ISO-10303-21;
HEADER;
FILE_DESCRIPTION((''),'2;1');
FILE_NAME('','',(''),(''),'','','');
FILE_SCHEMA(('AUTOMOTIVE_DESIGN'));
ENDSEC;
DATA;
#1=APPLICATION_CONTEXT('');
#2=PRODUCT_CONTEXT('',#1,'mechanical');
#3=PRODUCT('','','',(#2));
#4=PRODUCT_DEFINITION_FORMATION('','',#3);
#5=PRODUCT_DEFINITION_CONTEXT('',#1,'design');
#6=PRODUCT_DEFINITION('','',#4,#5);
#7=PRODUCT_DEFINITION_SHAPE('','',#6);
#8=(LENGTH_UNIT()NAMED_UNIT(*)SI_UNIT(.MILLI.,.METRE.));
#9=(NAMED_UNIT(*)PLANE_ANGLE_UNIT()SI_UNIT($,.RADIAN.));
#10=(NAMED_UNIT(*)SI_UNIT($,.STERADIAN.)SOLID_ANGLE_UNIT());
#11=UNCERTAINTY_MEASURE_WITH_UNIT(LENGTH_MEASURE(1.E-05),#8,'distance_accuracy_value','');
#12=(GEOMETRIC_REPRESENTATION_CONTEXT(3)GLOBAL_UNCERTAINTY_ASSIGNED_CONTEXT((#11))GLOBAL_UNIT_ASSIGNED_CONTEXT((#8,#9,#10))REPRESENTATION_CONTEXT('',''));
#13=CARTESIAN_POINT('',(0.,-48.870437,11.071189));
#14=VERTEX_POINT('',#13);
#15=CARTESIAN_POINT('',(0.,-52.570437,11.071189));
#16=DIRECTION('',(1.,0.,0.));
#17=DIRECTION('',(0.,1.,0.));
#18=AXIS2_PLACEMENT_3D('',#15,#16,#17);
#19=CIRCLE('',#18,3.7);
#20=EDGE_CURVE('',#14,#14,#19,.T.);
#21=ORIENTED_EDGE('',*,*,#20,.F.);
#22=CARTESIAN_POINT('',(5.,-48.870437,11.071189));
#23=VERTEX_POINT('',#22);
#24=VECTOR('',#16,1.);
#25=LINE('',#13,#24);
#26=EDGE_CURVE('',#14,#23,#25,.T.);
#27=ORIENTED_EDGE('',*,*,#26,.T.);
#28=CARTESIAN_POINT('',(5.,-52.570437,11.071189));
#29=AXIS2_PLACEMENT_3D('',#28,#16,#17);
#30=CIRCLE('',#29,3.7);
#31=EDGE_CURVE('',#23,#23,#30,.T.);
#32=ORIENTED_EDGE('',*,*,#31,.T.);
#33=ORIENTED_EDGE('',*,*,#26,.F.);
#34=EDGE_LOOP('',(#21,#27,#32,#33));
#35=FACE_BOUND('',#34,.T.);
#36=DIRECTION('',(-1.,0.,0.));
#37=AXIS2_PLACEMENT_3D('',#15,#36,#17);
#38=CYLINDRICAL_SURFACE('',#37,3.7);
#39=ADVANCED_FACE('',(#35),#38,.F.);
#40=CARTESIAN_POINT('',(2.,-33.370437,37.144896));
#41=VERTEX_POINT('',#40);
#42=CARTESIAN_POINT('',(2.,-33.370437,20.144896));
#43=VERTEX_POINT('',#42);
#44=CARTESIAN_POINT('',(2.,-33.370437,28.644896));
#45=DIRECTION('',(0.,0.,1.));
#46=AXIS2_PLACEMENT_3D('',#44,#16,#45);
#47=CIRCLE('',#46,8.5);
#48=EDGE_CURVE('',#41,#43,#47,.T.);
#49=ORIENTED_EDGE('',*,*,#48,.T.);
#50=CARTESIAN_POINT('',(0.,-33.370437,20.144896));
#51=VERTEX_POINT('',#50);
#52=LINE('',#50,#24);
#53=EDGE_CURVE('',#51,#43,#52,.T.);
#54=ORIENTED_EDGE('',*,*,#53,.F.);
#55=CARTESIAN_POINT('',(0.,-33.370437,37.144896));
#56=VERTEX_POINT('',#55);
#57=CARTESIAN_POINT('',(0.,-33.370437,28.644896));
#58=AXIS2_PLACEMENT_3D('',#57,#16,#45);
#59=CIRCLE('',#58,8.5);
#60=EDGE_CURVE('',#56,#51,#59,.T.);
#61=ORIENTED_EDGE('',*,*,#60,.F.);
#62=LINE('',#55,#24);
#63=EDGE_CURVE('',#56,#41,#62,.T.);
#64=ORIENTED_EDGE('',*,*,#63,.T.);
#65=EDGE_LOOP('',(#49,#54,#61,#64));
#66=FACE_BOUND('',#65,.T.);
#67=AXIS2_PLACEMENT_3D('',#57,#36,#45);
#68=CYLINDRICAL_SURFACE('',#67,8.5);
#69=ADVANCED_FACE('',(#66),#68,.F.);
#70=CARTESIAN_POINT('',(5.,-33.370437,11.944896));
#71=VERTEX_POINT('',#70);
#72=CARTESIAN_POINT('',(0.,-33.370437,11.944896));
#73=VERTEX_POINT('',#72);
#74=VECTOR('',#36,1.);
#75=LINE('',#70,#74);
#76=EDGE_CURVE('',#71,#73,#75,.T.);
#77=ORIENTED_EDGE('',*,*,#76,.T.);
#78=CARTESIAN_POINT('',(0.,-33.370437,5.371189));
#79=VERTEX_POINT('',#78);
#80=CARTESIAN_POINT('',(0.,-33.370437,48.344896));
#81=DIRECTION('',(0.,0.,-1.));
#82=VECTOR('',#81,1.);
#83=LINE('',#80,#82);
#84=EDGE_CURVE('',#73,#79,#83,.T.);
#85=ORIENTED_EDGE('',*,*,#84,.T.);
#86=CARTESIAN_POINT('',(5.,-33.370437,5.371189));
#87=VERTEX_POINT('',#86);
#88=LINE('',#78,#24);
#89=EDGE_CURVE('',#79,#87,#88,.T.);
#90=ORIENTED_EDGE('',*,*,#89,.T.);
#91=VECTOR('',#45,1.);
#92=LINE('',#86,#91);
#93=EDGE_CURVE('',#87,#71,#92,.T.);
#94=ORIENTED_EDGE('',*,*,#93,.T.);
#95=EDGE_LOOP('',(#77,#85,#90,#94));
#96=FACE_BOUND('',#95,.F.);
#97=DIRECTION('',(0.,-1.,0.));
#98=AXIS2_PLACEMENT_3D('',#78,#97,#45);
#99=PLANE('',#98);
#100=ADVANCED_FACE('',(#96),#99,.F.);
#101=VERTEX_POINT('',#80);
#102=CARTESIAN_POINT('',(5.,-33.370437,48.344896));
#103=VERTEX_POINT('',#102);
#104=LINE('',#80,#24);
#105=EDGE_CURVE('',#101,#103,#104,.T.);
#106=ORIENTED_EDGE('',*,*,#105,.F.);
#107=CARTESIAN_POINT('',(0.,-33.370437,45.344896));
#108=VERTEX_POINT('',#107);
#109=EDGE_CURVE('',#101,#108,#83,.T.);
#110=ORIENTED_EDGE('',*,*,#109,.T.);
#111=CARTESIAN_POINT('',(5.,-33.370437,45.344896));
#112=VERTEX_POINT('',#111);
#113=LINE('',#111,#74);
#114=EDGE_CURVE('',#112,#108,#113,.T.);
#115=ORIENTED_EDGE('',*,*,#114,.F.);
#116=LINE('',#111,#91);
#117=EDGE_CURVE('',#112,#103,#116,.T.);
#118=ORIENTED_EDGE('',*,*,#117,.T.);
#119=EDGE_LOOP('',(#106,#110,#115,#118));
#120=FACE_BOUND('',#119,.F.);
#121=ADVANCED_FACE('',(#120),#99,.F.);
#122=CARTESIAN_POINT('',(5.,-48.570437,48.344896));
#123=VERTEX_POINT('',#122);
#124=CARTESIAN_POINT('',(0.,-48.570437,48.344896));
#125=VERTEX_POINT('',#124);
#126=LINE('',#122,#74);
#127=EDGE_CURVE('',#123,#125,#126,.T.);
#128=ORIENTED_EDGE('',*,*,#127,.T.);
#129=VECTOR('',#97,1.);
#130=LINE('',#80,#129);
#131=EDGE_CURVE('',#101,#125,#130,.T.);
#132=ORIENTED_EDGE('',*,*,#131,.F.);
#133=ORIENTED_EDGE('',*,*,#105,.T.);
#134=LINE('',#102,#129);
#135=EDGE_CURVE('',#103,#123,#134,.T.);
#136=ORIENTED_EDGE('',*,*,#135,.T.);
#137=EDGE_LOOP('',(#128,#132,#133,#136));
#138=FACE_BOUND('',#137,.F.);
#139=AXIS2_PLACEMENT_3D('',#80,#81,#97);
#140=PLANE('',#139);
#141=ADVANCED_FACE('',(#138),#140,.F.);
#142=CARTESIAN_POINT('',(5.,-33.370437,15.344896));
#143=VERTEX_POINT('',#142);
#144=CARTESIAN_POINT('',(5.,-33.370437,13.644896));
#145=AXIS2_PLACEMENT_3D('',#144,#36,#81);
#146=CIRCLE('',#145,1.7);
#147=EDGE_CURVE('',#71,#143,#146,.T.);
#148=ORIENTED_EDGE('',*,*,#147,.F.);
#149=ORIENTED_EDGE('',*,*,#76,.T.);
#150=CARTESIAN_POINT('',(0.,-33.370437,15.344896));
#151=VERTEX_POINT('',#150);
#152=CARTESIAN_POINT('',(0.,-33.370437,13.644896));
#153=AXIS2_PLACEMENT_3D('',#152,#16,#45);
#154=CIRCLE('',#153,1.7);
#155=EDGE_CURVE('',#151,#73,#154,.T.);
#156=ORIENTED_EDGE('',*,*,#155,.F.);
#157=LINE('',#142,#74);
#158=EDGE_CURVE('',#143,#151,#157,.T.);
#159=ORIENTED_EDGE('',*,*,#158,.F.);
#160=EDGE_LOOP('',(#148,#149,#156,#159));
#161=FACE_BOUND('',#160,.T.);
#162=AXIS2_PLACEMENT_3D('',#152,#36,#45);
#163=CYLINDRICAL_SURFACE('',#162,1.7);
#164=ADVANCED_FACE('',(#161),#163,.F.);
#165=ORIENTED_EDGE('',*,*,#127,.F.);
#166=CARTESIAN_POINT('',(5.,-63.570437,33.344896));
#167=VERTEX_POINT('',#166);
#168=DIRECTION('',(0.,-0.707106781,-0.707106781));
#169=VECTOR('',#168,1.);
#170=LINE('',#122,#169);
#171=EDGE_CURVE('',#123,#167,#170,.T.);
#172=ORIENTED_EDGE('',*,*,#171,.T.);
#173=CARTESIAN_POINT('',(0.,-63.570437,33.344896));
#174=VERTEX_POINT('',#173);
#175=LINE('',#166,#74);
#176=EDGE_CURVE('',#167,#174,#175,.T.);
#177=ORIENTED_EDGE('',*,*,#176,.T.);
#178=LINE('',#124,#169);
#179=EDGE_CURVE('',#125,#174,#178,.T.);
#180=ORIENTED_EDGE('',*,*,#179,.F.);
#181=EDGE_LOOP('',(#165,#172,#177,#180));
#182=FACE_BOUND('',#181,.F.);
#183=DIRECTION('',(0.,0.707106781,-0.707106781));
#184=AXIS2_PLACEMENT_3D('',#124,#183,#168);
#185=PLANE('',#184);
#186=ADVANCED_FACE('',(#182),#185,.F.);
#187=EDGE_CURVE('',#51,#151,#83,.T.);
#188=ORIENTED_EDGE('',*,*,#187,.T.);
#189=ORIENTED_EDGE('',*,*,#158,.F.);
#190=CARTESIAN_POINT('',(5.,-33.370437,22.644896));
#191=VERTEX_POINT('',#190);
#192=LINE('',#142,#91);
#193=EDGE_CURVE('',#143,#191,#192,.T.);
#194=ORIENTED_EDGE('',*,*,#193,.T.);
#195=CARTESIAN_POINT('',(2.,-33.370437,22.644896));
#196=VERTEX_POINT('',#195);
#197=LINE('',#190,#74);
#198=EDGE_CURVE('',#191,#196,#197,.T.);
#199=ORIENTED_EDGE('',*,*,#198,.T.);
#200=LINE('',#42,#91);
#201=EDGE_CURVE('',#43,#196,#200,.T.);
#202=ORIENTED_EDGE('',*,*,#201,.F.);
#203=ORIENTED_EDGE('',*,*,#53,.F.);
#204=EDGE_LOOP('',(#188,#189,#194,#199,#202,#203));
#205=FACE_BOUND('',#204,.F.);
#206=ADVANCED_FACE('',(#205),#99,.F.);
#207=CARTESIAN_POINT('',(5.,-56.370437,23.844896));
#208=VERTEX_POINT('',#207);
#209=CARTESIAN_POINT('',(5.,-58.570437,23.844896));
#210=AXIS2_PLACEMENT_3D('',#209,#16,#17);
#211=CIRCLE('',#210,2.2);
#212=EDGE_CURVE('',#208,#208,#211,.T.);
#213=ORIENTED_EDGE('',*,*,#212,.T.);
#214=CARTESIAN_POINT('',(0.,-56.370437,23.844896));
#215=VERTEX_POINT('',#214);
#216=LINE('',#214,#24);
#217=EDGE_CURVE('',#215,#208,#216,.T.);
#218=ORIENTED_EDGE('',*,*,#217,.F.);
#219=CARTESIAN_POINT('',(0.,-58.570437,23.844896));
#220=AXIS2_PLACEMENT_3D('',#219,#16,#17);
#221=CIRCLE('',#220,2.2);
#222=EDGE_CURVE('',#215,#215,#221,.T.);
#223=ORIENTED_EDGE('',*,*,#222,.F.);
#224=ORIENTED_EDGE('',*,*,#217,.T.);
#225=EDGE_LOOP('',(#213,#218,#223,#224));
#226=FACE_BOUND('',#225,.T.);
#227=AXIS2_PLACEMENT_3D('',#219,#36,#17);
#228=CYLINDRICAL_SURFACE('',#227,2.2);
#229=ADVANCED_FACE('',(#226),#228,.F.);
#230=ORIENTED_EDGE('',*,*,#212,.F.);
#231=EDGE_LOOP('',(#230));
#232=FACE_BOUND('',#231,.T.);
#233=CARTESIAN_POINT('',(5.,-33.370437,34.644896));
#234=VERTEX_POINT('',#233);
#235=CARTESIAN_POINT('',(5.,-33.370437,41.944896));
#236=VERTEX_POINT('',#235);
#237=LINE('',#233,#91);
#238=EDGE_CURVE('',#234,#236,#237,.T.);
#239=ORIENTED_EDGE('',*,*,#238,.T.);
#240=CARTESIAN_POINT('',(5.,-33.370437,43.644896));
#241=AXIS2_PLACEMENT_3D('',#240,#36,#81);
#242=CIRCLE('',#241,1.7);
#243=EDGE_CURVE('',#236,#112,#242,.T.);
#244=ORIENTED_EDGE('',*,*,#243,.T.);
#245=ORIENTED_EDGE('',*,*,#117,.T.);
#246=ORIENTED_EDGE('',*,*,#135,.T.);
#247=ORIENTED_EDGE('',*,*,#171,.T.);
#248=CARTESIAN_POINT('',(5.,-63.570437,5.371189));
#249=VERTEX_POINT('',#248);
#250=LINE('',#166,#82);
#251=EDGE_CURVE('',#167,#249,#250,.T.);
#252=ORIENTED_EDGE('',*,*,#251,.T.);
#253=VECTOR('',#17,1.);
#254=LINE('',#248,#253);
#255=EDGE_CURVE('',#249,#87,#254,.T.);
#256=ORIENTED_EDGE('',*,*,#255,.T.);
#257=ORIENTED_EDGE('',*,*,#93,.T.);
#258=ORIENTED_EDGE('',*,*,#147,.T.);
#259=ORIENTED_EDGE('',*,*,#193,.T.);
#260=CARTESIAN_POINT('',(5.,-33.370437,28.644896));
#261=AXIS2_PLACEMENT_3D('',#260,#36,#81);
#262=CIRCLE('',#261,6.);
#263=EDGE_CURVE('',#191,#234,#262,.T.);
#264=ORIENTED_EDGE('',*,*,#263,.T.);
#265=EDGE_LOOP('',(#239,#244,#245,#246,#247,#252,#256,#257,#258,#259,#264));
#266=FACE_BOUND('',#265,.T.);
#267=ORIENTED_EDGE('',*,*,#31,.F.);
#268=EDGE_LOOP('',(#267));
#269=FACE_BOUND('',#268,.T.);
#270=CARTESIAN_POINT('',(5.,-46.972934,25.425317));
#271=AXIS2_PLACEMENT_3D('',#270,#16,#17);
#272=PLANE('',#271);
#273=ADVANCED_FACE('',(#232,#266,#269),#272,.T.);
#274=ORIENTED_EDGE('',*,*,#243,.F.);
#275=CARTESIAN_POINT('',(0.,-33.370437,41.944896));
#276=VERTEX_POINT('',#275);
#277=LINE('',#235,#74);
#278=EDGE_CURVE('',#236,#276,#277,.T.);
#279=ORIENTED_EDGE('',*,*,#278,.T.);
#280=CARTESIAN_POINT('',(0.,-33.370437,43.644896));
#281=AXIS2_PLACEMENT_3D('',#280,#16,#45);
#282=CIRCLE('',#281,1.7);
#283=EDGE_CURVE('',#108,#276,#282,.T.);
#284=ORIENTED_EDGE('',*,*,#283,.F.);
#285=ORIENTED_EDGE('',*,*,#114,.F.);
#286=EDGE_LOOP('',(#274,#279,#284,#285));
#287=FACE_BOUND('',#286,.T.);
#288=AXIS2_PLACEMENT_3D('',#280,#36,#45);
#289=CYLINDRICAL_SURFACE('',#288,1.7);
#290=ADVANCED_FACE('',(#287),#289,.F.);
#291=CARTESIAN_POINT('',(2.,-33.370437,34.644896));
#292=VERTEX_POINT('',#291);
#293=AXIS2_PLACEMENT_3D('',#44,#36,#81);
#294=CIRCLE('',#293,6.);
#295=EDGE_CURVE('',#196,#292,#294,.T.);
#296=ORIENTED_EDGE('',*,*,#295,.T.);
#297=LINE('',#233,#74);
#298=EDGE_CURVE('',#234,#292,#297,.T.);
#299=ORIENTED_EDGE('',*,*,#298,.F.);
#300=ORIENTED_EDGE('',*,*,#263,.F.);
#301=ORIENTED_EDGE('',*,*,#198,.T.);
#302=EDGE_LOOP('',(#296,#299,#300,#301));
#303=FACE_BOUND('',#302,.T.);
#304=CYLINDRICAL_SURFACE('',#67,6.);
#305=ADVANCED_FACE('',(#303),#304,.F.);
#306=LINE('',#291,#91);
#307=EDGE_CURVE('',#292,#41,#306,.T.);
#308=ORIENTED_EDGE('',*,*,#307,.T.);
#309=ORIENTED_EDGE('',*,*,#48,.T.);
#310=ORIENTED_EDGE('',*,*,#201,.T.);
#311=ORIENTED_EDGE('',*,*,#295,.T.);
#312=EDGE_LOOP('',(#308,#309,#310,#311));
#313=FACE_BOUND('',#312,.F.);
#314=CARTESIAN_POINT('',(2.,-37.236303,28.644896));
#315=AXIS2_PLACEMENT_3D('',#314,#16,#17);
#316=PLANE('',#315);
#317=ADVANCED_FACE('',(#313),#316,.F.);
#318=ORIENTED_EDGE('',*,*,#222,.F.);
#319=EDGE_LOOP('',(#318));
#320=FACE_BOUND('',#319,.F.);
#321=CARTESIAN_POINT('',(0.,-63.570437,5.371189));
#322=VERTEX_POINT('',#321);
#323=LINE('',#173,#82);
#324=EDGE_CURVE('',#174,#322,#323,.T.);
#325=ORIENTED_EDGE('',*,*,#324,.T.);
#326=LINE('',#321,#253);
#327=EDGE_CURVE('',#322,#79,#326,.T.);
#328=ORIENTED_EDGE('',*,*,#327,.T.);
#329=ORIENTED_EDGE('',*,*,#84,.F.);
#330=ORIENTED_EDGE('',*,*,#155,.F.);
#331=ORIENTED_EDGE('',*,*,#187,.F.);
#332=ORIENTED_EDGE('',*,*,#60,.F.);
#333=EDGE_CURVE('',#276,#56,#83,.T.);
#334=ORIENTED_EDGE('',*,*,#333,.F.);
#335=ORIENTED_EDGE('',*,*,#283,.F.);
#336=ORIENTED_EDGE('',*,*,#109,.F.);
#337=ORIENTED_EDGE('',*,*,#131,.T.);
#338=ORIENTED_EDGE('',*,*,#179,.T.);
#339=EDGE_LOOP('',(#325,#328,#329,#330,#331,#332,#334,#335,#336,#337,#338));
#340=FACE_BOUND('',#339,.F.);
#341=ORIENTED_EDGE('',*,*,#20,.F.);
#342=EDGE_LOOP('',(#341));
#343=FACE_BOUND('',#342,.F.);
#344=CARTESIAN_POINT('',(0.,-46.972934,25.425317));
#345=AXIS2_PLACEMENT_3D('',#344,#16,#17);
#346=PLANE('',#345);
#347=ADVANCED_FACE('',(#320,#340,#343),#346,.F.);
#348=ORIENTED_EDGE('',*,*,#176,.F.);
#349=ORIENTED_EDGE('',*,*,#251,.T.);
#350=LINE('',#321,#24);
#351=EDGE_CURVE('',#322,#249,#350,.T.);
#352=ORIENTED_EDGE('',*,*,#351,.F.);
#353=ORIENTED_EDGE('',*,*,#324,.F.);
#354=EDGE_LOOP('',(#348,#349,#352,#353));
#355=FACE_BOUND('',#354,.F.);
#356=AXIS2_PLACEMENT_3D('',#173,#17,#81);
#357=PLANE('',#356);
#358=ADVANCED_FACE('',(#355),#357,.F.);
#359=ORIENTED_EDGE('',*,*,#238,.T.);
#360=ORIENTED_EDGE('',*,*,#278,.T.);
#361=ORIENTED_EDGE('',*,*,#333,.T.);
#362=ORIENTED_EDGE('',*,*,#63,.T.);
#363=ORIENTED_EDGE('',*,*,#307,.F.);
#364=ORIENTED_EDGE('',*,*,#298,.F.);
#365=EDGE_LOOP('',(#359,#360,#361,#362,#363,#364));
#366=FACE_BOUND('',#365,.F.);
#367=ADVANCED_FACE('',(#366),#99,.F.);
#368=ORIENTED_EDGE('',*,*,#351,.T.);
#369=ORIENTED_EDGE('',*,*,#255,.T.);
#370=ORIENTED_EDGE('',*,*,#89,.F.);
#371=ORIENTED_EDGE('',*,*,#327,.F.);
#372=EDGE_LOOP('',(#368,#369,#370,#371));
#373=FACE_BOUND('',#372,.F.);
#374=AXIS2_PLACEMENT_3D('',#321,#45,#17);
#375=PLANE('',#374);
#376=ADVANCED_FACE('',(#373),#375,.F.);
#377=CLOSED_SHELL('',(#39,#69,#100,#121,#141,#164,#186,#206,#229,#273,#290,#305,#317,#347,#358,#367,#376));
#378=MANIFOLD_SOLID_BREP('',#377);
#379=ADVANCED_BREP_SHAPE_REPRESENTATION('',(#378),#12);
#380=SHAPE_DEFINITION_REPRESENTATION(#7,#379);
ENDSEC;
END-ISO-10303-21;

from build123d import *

# Parameters (mm, degrees)
F0_R     = 3.7
F0_R_2   = 2.2
F1_DEPTH = 5
F2_DEPTH = 3
F3_DEPTH = 3
F5_DEPTH = 2


# Not quite as in the source:
# - a feature of the source that left no trace in its solid (it failed there, or was rolled back) is left out


with BuildPart() as f1:
    # F0 (on Right) → F1 (new body)
    with BuildSketch(Plane.YZ):
        with BuildLine():
            Line((-63.5704365752, 33.3448962937), (-63.5704365752, 5.3711892086))
            Line((-63.5704365752, 5.3711892086), (-33.3704365752, 5.3711892086))
            Line((-33.3704365752, 5.3711892086), (-33.3704365752, 11.9448962937))
            ThreePointArc((-33.3704365752, 11.9448962937), (-35.0704365752, 13.6448962937), (-33.3704365752, 15.3448962937))
            Line((-33.3704365752, 15.3448962937), (-33.3704365752, 20.1448962937))
            ThreePointArc((-33.3704365752, 20.1448962937), (-41.8704365752, 28.6448962937), (-33.3704365752, 37.1448962937))
            Line((-33.3704365752, 37.1448962937), (-33.3704365752, 41.9448962937))
            ThreePointArc((-33.3704365752, 41.9448962937), (-35.0704365752, 43.6448962937), (-33.3704365752, 45.3448962937))
            Line((-33.3704365752, 45.3448962937), (-33.3704365752, 48.3448962937))
            Line((-33.3704365752, 48.3448962937), (-48.5704365752, 48.3448962937))
            Line((-48.5704365752, 48.3448962937), (-63.5704365752, 33.3448962937))
        make_face()
        with Locations((-52.5704365752, 11.0711892086)):
            Circle(F0_R, mode=Mode.SUBTRACT)
        with Locations((-58.5704365752, 23.8448962937)):
            Circle(F0_R_2, mode=Mode.SUBTRACT)
        with BuildLine():
            ThreePointArc((-33.3704365752, 37.1448962937), (-41.8704365752, 28.6448962937), (-33.3704365752, 20.1448962937))
            Line((-33.3704365752, 20.1448962937), (-33.3704365752, 22.6448962937))
            ThreePointArc((-33.3704365752, 22.6448962937), (-39.3704365752, 28.6448962937), (-33.3704365752, 34.6448962937))
            Line((-33.3704365752, 34.6448962937), (-33.3704365752, 37.1448962937))
        make_face()
    extrude(amount=F1_DEPTH)

    # F0 (on Right) → F2 (join)
    with BuildSketch(Plane.YZ):
        with BuildLine():
            Line((-63.5704365752, 33.3448962937), (-63.5704365752, 5.3711892086))
            Line((-63.5704365752, 5.3711892086), (-33.3704365752, 5.3711892086))
            Line((-33.3704365752, 5.3711892086), (-33.3704365752, 11.9448962937))
            ThreePointArc((-33.3704365752, 11.9448962937), (-35.0704365752, 13.6448962937), (-33.3704365752, 15.3448962937))
            Line((-33.3704365752, 15.3448962937), (-33.3704365752, 20.1448962937))
            ThreePointArc((-33.3704365752, 20.1448962937), (-41.8704365752, 28.6448962937), (-33.3704365752, 37.1448962937))
            Line((-33.3704365752, 37.1448962937), (-33.3704365752, 41.9448962937))
            ThreePointArc((-33.3704365752, 41.9448962937), (-35.0704365752, 43.6448962937), (-33.3704365752, 45.3448962937))
            Line((-33.3704365752, 45.3448962937), (-33.3704365752, 48.3448962937))
            Line((-33.3704365752, 48.3448962937), (-48.5704365752, 48.3448962937))
            Line((-48.5704365752, 48.3448962937), (-63.5704365752, 33.3448962937))
        make_face()
        with Locations((-52.5704365752, 11.0711892086)):
            Circle(F0_R, mode=Mode.SUBTRACT)
        with Locations((-58.5704365752, 23.8448962937)):
            Circle(F0_R_2, mode=Mode.SUBTRACT)
        with BuildLine():
            ThreePointArc((-33.3704365752, 15.3448962937), (-35.0704365752, 13.6448962937), (-33.3704365752, 11.9448962937))
            Line((-33.3704365752, 11.9448962937), (-33.3704365752, 15.3448962937))
        make_face()
        with BuildLine():
            ThreePointArc((-33.3704365752, 37.1448962937), (-41.8704365752, 28.6448962937), (-33.3704365752, 20.1448962937))
            Line((-33.3704365752, 20.1448962937), (-33.3704365752, 22.6448962937))
            ThreePointArc((-33.3704365752, 22.6448962937), (-39.3704365752, 28.6448962937), (-33.3704365752, 34.6448962937))
            Line((-33.3704365752, 34.6448962937), (-33.3704365752, 37.1448962937))
        make_face()
        with BuildLine():
            Line((-33.3704365752, 41.9448962937), (-33.3704365752, 45.3448962937))
            ThreePointArc((-33.3704365752, 45.3448962937), (-35.0704365752, 43.6448962937), (-33.3704365752, 41.9448962937))
        make_face()
        with BuildLine():
            ThreePointArc((-33.3704365752, 34.6448962937), (-39.3704365752, 28.6448962937), (-33.3704365752, 22.6448962937))
            Line((-33.3704365752, 22.6448962937), (-33.3704365752, 34.6448962937))
        make_face()
    extrude(amount=F2_DEPTH)

    # F0 (on Right) → F3 (cut, through all)
    with BuildSketch(Plane.YZ):
        with BuildLine():
            ThreePointArc((-33.3704365752, 34.6448962937), (-39.3704365752, 28.6448962937), (-33.3704365752, 22.6448962937))
            Line((-33.3704365752, 22.6448962937), (-33.3704365752, 34.6448962937))
        make_face()
        with BuildLine():
            Line((-33.3704365752, 41.9448962937), (-33.3704365752, 45.3448962937))
            ThreePointArc((-33.3704365752, 45.3448962937), (-35.0704365752, 43.6448962937), (-33.3704365752, 41.9448962937))
        make_face()
        with BuildLine():
            ThreePointArc((-33.3704365752, 15.3448962937), (-35.0704365752, 13.6448962937), (-33.3704365752, 11.9448962937))
            Line((-33.3704365752, 11.9448962937), (-33.3704365752, 15.3448962937))
        make_face()
    extrude(amount=F3_DEPTH, mode=Mode.SUBTRACT)

    # F0 (on Right) → F5 (cut)
    with BuildSketch(Plane.YZ):
        with BuildLine():
            ThreePointArc((-33.3704365752, 37.1448962937), (-41.8704365752, 28.6448962937), (-33.3704365752, 20.1448962937))
            Line((-33.3704365752, 20.1448962937), (-33.3704365752, 22.6448962937))
            ThreePointArc((-33.3704365752, 22.6448962937), (-39.3704365752, 28.6448962937), (-33.3704365752, 34.6448962937))
            Line((-33.3704365752, 34.6448962937), (-33.3704365752, 37.1448962937))
        make_face()
    extrude(amount=F5_DEPTH, mode=Mode.SUBTRACT)


solid = f1.part
